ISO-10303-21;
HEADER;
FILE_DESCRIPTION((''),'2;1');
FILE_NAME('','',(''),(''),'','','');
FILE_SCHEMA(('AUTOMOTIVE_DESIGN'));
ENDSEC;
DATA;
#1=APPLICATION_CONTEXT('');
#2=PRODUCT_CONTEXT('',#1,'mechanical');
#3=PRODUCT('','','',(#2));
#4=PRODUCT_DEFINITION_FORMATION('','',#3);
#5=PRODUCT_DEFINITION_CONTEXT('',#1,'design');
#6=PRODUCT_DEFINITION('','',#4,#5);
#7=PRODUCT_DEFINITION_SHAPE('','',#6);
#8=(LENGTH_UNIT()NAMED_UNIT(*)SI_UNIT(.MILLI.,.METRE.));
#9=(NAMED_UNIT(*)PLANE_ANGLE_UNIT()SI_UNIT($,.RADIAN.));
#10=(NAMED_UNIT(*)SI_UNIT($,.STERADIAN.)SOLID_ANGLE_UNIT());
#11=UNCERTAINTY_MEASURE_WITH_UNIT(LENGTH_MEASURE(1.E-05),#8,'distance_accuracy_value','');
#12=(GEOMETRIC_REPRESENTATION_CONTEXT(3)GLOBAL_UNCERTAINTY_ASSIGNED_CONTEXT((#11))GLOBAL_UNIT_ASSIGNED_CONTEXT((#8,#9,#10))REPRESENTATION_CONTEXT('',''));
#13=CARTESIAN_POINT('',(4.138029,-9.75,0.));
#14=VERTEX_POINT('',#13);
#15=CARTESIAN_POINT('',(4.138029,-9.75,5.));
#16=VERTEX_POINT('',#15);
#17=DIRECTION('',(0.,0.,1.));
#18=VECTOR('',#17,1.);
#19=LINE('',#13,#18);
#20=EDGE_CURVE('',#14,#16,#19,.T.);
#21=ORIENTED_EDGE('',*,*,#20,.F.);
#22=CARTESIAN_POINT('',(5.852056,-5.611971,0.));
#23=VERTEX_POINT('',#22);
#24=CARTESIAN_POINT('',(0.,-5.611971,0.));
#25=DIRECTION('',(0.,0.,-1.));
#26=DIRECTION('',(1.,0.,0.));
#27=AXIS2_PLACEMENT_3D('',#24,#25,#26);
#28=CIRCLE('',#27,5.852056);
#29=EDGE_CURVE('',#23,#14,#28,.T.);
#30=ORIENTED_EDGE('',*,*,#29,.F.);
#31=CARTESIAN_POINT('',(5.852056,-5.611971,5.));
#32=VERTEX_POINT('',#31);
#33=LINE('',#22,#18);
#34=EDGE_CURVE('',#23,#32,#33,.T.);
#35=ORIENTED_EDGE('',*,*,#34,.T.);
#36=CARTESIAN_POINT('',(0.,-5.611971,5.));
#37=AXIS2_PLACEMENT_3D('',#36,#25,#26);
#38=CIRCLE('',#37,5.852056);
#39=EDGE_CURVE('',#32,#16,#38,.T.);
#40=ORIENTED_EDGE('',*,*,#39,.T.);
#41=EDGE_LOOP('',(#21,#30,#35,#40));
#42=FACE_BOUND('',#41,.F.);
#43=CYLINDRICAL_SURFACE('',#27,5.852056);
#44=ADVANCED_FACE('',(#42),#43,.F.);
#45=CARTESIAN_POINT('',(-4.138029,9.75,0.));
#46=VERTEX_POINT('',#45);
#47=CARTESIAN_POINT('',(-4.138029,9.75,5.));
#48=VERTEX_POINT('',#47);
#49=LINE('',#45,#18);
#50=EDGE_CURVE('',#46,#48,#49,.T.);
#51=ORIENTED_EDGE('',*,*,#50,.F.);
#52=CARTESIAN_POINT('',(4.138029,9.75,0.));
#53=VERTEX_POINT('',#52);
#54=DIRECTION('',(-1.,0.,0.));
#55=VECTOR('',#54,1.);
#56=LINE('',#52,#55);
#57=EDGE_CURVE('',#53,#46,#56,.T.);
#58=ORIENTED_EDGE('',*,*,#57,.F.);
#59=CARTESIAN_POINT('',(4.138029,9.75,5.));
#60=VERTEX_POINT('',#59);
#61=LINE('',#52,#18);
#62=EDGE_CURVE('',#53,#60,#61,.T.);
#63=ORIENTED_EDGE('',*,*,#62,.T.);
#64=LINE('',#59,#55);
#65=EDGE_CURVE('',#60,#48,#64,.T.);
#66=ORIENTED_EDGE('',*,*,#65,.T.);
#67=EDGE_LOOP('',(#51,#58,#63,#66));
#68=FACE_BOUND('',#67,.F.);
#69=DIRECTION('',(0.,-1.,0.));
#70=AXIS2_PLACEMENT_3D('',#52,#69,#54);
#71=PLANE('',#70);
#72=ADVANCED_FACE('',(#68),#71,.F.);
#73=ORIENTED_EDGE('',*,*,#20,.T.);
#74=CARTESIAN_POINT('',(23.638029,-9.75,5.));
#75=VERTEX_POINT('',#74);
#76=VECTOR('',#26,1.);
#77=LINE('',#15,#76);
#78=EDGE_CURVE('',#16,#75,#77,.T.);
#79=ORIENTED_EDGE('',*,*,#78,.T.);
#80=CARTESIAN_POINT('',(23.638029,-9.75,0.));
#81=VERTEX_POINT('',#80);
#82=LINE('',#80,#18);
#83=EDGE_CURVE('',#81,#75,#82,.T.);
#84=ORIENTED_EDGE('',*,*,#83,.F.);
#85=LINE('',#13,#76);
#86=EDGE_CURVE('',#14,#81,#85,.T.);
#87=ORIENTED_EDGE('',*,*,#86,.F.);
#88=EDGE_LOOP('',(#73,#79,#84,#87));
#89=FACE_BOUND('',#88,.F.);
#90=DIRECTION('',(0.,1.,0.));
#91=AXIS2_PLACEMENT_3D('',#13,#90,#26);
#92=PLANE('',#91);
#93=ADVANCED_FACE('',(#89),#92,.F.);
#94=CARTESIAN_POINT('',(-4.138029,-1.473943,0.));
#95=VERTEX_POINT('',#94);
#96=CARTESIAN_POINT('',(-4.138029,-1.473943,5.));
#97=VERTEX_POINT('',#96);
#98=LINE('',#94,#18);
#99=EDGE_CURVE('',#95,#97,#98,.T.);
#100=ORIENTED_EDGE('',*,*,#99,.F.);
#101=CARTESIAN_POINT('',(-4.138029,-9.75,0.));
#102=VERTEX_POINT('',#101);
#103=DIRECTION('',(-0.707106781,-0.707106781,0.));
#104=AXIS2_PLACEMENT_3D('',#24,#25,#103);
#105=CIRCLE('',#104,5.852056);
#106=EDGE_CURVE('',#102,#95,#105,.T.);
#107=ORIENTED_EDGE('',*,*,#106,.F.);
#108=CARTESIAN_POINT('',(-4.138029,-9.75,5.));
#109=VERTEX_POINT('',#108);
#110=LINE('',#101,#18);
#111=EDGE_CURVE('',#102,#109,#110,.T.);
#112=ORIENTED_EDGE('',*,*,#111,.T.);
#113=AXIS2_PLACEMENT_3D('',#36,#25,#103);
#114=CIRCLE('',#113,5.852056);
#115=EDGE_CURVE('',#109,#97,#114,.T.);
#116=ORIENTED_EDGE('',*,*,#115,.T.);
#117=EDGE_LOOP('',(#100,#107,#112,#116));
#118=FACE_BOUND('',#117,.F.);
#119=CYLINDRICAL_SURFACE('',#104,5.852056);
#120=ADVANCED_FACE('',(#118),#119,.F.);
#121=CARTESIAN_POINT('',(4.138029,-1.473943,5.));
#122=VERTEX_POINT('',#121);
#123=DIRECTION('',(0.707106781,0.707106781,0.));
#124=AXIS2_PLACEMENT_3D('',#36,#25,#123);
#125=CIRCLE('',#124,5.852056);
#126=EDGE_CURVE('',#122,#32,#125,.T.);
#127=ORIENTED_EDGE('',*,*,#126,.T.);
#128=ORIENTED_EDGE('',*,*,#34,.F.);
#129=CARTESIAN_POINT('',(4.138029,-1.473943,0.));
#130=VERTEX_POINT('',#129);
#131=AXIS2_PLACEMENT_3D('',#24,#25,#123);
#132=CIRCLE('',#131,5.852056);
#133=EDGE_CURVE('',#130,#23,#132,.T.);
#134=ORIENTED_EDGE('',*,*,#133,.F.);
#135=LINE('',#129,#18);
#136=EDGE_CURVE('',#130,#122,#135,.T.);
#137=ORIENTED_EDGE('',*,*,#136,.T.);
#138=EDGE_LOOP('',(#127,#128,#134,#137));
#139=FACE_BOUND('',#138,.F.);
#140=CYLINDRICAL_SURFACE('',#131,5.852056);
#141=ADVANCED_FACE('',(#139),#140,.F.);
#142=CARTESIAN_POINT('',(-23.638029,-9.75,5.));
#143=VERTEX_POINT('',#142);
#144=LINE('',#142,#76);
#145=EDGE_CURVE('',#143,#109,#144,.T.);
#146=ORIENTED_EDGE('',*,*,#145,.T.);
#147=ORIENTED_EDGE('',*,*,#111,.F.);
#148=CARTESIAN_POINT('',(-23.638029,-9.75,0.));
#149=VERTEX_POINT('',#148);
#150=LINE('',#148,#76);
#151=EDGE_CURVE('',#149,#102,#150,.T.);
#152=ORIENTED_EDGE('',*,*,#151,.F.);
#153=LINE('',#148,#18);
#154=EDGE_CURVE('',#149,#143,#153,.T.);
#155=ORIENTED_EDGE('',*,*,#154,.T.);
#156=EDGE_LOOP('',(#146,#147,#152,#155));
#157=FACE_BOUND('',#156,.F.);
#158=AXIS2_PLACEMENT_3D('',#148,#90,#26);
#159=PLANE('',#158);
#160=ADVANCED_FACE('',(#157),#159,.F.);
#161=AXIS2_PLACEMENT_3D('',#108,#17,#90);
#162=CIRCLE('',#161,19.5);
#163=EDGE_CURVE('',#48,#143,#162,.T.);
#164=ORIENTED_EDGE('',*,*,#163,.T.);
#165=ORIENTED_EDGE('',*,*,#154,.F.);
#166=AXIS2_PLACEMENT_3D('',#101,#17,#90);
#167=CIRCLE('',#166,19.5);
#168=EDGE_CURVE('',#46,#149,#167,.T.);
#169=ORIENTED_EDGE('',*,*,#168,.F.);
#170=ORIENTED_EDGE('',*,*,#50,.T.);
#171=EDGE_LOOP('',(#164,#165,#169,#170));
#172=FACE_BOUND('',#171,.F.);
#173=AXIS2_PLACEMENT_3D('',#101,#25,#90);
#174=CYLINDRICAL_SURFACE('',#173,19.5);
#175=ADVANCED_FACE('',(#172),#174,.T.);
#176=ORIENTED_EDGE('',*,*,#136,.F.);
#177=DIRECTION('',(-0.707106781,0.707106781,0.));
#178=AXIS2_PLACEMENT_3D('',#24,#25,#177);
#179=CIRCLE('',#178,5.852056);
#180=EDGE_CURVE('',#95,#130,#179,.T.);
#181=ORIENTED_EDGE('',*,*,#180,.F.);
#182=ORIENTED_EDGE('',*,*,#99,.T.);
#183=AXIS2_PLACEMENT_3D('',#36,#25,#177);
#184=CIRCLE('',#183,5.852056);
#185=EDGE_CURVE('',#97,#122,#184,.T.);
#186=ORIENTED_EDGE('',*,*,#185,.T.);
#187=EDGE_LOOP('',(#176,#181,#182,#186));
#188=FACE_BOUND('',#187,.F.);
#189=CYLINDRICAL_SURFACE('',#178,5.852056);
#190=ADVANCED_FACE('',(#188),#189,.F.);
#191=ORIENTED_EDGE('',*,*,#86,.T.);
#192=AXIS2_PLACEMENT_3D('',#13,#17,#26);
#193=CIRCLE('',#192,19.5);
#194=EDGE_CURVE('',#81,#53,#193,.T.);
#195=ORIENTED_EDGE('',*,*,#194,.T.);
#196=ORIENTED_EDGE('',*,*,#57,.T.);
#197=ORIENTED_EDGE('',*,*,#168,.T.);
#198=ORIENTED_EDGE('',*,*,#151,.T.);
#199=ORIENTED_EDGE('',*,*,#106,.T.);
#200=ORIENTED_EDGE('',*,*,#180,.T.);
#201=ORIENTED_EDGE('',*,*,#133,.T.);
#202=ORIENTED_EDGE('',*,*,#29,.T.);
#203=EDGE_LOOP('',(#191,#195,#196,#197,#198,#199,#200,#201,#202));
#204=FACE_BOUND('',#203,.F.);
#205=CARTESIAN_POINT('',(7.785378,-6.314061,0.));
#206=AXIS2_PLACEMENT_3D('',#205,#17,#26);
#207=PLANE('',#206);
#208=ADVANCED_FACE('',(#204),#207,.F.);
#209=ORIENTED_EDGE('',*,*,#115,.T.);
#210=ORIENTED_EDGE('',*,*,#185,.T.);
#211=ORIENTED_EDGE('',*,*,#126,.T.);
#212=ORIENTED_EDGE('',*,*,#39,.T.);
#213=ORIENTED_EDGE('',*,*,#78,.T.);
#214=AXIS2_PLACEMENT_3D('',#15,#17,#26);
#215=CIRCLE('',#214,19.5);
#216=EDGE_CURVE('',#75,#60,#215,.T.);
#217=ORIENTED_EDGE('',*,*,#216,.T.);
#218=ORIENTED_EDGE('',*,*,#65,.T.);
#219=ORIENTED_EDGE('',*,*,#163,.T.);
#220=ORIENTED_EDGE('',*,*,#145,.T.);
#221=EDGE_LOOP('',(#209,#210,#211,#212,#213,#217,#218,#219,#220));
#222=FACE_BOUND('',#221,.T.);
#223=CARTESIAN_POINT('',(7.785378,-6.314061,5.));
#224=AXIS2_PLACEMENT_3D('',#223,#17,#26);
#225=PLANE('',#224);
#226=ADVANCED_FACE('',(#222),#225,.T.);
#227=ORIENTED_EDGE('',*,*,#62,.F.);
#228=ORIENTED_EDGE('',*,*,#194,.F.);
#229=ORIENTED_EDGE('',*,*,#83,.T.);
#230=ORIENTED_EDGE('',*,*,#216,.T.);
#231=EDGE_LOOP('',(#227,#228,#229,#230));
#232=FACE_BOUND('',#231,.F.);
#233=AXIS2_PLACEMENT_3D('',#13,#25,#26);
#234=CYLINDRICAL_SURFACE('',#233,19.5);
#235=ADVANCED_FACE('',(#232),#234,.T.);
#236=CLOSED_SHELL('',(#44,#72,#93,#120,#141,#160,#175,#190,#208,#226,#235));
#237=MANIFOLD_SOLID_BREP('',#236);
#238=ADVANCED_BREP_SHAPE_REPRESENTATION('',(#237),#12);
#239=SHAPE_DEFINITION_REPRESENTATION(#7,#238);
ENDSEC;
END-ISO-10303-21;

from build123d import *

# Parameters (mm, degrees)
F1_DEPTH = 5


with BuildPart() as f1:
    # F0 (on Top) → F1 (new body)
    with BuildSketch(Plane.XY):
        with BuildLine():
            ThreePointArc((5.8520560333, -5.611971495), (5.4065947922, -7.8514563842), (4.138028505, -9.75))
            Line((4.138028505, -9.75), (9.8424661541, -9.75))
            Line((9.8424661541, -9.75), (12.414085515, -9.75))
            ThreePointArc((12.414085515, -9.75), (9.9900845383, -3.8979439667), (4.138028505, -1.47394299))
            ThreePointArc((4.138028505, -1.47394299), (5.4065947922, -3.3724866058), (5.8520560333, -5.611971495))
        make_face()
        with BuildLine():
            Line((-12.414085515, -9.75), (-4.138028505, -9.75))
            ThreePointArc((-4.138028505, -9.75), (-5.8520560333, -5.611971495), (-4.138028505, -1.47394299))
            ThreePointArc((-4.138028505, -1.47394299), (-9.9900845383, -3.8979439667), (-12.414085515, -9.75))
        make_face()
        with BuildLine():
            ThreePointArc((-4.138028505, -1.47394299), (0, 0.2400845383), (4.138028505, -1.47394299))
            Line((4.138028505, -1.47394299), (4.138028505, 7.9066384221))
            ThreePointArc((4.138028505, 7.9066384221), (2.1083185822, 8.7224970718), (0, 9.305884133))
            ThreePointArc((0, 9.305884133), (-2.1083185822, 8.7224970718), (-4.138028505, 7.9066384221))
            Line((-4.138028505, 7.9066384221), (-4.138028505, -1.47394299))
        make_face()
        with BuildLine():
            Line((4.138028505, 7.9066384221), (4.138028505, -1.47394299))
            ThreePointArc((4.138028505, -1.47394299), (9.9900845383, -3.8979439667), (12.414085515, -9.75))
            Line((12.414085515, -9.75), (15.361971495, -9.75))
            ThreePointArc((15.361971495, -9.75), (12.3184764656, 0.7110441234), (4.138028505, 7.9066384221))
        make_face()
        with BuildLine():
            ThreePointArc((-12.414085515, -9.75), (-9.9900845383, -3.8979439667), (-4.138028505, -1.47394299))
            Line((-4.138028505, -1.47394299), (-4.138028505, 7.9066384221))
            ThreePointArc((-4.138028505, 7.9066384221), (-12.3184764656, 0.7110441234), (-15.361971495, -9.75))
            Line((-15.361971495, -9.75), (-12.414085515, -9.75))
        make_face()
        with BuildLine():
            ThreePointArc((0, 9.305884133), (2.1083185822, 8.7224970718), (4.138028505, 7.9066384221))
            Line((4.138028505, 7.9066384221), (4.138028505, 9.75))
            ThreePointArc((4.138028505, 9.75), (2.057132135, 9.6386531326), (0, 9.305884133))
        make_face()
        with BuildLine():
            Line((4.138028505, 9.75), (4.138028505, 7.9066384221))
            ThreePointArc((4.138028505, 7.9066384221), (12.3184764656, 0.7110441234), (15.361971495, -9.75))
            Line((15.361971495, -9.75), (23.638028505, -9.75))
            ThreePointArc((23.638028505, -9.75), (17.9266107381, 4.0385822331), (4.138028505, 9.75))
        make_face()
        with BuildLine():
            ThreePointArc((-15.361971495, -9.75), (-12.3184764656, 0.7110441234), (-4.138028505, 7.9066384221))
            Line((-4.138028505, 7.9066384221), (-4.138028505, 9.75))
            ThreePointArc((-4.138028505, 9.75), (-17.9266107381, 4.0385822331), (-23.638028505, -9.75))
            Line((-23.638028505, -9.75), (-15.361971495, -9.75))
        make_face()
        with BuildLine():
            Line((-4.138028505, 9.75), (-4.138028505, 7.9066384221))
            ThreePointArc((-4.138028505, 7.9066384221), (-2.1083185822, 8.7224970718), (0, 9.305884133))
            ThreePointArc((0, 9.305884133), (-2.057132135, 9.6386531326), (-4.138028505, 9.75))
        make_face()
        with BuildLine():
            ThreePointArc((0, 9.305884133), (2.057132135, 9.6386531326), (4.138028505, 9.75))
            Line((4.138028505, 9.75), (-4.138028505, 9.75))
            ThreePointArc((-4.138028505, 9.75), (-2.057132135, 9.6386531326), (0, 9.305884133))
        make_face()
    extrude(amount=F1_DEPTH)


solid = f1.part
